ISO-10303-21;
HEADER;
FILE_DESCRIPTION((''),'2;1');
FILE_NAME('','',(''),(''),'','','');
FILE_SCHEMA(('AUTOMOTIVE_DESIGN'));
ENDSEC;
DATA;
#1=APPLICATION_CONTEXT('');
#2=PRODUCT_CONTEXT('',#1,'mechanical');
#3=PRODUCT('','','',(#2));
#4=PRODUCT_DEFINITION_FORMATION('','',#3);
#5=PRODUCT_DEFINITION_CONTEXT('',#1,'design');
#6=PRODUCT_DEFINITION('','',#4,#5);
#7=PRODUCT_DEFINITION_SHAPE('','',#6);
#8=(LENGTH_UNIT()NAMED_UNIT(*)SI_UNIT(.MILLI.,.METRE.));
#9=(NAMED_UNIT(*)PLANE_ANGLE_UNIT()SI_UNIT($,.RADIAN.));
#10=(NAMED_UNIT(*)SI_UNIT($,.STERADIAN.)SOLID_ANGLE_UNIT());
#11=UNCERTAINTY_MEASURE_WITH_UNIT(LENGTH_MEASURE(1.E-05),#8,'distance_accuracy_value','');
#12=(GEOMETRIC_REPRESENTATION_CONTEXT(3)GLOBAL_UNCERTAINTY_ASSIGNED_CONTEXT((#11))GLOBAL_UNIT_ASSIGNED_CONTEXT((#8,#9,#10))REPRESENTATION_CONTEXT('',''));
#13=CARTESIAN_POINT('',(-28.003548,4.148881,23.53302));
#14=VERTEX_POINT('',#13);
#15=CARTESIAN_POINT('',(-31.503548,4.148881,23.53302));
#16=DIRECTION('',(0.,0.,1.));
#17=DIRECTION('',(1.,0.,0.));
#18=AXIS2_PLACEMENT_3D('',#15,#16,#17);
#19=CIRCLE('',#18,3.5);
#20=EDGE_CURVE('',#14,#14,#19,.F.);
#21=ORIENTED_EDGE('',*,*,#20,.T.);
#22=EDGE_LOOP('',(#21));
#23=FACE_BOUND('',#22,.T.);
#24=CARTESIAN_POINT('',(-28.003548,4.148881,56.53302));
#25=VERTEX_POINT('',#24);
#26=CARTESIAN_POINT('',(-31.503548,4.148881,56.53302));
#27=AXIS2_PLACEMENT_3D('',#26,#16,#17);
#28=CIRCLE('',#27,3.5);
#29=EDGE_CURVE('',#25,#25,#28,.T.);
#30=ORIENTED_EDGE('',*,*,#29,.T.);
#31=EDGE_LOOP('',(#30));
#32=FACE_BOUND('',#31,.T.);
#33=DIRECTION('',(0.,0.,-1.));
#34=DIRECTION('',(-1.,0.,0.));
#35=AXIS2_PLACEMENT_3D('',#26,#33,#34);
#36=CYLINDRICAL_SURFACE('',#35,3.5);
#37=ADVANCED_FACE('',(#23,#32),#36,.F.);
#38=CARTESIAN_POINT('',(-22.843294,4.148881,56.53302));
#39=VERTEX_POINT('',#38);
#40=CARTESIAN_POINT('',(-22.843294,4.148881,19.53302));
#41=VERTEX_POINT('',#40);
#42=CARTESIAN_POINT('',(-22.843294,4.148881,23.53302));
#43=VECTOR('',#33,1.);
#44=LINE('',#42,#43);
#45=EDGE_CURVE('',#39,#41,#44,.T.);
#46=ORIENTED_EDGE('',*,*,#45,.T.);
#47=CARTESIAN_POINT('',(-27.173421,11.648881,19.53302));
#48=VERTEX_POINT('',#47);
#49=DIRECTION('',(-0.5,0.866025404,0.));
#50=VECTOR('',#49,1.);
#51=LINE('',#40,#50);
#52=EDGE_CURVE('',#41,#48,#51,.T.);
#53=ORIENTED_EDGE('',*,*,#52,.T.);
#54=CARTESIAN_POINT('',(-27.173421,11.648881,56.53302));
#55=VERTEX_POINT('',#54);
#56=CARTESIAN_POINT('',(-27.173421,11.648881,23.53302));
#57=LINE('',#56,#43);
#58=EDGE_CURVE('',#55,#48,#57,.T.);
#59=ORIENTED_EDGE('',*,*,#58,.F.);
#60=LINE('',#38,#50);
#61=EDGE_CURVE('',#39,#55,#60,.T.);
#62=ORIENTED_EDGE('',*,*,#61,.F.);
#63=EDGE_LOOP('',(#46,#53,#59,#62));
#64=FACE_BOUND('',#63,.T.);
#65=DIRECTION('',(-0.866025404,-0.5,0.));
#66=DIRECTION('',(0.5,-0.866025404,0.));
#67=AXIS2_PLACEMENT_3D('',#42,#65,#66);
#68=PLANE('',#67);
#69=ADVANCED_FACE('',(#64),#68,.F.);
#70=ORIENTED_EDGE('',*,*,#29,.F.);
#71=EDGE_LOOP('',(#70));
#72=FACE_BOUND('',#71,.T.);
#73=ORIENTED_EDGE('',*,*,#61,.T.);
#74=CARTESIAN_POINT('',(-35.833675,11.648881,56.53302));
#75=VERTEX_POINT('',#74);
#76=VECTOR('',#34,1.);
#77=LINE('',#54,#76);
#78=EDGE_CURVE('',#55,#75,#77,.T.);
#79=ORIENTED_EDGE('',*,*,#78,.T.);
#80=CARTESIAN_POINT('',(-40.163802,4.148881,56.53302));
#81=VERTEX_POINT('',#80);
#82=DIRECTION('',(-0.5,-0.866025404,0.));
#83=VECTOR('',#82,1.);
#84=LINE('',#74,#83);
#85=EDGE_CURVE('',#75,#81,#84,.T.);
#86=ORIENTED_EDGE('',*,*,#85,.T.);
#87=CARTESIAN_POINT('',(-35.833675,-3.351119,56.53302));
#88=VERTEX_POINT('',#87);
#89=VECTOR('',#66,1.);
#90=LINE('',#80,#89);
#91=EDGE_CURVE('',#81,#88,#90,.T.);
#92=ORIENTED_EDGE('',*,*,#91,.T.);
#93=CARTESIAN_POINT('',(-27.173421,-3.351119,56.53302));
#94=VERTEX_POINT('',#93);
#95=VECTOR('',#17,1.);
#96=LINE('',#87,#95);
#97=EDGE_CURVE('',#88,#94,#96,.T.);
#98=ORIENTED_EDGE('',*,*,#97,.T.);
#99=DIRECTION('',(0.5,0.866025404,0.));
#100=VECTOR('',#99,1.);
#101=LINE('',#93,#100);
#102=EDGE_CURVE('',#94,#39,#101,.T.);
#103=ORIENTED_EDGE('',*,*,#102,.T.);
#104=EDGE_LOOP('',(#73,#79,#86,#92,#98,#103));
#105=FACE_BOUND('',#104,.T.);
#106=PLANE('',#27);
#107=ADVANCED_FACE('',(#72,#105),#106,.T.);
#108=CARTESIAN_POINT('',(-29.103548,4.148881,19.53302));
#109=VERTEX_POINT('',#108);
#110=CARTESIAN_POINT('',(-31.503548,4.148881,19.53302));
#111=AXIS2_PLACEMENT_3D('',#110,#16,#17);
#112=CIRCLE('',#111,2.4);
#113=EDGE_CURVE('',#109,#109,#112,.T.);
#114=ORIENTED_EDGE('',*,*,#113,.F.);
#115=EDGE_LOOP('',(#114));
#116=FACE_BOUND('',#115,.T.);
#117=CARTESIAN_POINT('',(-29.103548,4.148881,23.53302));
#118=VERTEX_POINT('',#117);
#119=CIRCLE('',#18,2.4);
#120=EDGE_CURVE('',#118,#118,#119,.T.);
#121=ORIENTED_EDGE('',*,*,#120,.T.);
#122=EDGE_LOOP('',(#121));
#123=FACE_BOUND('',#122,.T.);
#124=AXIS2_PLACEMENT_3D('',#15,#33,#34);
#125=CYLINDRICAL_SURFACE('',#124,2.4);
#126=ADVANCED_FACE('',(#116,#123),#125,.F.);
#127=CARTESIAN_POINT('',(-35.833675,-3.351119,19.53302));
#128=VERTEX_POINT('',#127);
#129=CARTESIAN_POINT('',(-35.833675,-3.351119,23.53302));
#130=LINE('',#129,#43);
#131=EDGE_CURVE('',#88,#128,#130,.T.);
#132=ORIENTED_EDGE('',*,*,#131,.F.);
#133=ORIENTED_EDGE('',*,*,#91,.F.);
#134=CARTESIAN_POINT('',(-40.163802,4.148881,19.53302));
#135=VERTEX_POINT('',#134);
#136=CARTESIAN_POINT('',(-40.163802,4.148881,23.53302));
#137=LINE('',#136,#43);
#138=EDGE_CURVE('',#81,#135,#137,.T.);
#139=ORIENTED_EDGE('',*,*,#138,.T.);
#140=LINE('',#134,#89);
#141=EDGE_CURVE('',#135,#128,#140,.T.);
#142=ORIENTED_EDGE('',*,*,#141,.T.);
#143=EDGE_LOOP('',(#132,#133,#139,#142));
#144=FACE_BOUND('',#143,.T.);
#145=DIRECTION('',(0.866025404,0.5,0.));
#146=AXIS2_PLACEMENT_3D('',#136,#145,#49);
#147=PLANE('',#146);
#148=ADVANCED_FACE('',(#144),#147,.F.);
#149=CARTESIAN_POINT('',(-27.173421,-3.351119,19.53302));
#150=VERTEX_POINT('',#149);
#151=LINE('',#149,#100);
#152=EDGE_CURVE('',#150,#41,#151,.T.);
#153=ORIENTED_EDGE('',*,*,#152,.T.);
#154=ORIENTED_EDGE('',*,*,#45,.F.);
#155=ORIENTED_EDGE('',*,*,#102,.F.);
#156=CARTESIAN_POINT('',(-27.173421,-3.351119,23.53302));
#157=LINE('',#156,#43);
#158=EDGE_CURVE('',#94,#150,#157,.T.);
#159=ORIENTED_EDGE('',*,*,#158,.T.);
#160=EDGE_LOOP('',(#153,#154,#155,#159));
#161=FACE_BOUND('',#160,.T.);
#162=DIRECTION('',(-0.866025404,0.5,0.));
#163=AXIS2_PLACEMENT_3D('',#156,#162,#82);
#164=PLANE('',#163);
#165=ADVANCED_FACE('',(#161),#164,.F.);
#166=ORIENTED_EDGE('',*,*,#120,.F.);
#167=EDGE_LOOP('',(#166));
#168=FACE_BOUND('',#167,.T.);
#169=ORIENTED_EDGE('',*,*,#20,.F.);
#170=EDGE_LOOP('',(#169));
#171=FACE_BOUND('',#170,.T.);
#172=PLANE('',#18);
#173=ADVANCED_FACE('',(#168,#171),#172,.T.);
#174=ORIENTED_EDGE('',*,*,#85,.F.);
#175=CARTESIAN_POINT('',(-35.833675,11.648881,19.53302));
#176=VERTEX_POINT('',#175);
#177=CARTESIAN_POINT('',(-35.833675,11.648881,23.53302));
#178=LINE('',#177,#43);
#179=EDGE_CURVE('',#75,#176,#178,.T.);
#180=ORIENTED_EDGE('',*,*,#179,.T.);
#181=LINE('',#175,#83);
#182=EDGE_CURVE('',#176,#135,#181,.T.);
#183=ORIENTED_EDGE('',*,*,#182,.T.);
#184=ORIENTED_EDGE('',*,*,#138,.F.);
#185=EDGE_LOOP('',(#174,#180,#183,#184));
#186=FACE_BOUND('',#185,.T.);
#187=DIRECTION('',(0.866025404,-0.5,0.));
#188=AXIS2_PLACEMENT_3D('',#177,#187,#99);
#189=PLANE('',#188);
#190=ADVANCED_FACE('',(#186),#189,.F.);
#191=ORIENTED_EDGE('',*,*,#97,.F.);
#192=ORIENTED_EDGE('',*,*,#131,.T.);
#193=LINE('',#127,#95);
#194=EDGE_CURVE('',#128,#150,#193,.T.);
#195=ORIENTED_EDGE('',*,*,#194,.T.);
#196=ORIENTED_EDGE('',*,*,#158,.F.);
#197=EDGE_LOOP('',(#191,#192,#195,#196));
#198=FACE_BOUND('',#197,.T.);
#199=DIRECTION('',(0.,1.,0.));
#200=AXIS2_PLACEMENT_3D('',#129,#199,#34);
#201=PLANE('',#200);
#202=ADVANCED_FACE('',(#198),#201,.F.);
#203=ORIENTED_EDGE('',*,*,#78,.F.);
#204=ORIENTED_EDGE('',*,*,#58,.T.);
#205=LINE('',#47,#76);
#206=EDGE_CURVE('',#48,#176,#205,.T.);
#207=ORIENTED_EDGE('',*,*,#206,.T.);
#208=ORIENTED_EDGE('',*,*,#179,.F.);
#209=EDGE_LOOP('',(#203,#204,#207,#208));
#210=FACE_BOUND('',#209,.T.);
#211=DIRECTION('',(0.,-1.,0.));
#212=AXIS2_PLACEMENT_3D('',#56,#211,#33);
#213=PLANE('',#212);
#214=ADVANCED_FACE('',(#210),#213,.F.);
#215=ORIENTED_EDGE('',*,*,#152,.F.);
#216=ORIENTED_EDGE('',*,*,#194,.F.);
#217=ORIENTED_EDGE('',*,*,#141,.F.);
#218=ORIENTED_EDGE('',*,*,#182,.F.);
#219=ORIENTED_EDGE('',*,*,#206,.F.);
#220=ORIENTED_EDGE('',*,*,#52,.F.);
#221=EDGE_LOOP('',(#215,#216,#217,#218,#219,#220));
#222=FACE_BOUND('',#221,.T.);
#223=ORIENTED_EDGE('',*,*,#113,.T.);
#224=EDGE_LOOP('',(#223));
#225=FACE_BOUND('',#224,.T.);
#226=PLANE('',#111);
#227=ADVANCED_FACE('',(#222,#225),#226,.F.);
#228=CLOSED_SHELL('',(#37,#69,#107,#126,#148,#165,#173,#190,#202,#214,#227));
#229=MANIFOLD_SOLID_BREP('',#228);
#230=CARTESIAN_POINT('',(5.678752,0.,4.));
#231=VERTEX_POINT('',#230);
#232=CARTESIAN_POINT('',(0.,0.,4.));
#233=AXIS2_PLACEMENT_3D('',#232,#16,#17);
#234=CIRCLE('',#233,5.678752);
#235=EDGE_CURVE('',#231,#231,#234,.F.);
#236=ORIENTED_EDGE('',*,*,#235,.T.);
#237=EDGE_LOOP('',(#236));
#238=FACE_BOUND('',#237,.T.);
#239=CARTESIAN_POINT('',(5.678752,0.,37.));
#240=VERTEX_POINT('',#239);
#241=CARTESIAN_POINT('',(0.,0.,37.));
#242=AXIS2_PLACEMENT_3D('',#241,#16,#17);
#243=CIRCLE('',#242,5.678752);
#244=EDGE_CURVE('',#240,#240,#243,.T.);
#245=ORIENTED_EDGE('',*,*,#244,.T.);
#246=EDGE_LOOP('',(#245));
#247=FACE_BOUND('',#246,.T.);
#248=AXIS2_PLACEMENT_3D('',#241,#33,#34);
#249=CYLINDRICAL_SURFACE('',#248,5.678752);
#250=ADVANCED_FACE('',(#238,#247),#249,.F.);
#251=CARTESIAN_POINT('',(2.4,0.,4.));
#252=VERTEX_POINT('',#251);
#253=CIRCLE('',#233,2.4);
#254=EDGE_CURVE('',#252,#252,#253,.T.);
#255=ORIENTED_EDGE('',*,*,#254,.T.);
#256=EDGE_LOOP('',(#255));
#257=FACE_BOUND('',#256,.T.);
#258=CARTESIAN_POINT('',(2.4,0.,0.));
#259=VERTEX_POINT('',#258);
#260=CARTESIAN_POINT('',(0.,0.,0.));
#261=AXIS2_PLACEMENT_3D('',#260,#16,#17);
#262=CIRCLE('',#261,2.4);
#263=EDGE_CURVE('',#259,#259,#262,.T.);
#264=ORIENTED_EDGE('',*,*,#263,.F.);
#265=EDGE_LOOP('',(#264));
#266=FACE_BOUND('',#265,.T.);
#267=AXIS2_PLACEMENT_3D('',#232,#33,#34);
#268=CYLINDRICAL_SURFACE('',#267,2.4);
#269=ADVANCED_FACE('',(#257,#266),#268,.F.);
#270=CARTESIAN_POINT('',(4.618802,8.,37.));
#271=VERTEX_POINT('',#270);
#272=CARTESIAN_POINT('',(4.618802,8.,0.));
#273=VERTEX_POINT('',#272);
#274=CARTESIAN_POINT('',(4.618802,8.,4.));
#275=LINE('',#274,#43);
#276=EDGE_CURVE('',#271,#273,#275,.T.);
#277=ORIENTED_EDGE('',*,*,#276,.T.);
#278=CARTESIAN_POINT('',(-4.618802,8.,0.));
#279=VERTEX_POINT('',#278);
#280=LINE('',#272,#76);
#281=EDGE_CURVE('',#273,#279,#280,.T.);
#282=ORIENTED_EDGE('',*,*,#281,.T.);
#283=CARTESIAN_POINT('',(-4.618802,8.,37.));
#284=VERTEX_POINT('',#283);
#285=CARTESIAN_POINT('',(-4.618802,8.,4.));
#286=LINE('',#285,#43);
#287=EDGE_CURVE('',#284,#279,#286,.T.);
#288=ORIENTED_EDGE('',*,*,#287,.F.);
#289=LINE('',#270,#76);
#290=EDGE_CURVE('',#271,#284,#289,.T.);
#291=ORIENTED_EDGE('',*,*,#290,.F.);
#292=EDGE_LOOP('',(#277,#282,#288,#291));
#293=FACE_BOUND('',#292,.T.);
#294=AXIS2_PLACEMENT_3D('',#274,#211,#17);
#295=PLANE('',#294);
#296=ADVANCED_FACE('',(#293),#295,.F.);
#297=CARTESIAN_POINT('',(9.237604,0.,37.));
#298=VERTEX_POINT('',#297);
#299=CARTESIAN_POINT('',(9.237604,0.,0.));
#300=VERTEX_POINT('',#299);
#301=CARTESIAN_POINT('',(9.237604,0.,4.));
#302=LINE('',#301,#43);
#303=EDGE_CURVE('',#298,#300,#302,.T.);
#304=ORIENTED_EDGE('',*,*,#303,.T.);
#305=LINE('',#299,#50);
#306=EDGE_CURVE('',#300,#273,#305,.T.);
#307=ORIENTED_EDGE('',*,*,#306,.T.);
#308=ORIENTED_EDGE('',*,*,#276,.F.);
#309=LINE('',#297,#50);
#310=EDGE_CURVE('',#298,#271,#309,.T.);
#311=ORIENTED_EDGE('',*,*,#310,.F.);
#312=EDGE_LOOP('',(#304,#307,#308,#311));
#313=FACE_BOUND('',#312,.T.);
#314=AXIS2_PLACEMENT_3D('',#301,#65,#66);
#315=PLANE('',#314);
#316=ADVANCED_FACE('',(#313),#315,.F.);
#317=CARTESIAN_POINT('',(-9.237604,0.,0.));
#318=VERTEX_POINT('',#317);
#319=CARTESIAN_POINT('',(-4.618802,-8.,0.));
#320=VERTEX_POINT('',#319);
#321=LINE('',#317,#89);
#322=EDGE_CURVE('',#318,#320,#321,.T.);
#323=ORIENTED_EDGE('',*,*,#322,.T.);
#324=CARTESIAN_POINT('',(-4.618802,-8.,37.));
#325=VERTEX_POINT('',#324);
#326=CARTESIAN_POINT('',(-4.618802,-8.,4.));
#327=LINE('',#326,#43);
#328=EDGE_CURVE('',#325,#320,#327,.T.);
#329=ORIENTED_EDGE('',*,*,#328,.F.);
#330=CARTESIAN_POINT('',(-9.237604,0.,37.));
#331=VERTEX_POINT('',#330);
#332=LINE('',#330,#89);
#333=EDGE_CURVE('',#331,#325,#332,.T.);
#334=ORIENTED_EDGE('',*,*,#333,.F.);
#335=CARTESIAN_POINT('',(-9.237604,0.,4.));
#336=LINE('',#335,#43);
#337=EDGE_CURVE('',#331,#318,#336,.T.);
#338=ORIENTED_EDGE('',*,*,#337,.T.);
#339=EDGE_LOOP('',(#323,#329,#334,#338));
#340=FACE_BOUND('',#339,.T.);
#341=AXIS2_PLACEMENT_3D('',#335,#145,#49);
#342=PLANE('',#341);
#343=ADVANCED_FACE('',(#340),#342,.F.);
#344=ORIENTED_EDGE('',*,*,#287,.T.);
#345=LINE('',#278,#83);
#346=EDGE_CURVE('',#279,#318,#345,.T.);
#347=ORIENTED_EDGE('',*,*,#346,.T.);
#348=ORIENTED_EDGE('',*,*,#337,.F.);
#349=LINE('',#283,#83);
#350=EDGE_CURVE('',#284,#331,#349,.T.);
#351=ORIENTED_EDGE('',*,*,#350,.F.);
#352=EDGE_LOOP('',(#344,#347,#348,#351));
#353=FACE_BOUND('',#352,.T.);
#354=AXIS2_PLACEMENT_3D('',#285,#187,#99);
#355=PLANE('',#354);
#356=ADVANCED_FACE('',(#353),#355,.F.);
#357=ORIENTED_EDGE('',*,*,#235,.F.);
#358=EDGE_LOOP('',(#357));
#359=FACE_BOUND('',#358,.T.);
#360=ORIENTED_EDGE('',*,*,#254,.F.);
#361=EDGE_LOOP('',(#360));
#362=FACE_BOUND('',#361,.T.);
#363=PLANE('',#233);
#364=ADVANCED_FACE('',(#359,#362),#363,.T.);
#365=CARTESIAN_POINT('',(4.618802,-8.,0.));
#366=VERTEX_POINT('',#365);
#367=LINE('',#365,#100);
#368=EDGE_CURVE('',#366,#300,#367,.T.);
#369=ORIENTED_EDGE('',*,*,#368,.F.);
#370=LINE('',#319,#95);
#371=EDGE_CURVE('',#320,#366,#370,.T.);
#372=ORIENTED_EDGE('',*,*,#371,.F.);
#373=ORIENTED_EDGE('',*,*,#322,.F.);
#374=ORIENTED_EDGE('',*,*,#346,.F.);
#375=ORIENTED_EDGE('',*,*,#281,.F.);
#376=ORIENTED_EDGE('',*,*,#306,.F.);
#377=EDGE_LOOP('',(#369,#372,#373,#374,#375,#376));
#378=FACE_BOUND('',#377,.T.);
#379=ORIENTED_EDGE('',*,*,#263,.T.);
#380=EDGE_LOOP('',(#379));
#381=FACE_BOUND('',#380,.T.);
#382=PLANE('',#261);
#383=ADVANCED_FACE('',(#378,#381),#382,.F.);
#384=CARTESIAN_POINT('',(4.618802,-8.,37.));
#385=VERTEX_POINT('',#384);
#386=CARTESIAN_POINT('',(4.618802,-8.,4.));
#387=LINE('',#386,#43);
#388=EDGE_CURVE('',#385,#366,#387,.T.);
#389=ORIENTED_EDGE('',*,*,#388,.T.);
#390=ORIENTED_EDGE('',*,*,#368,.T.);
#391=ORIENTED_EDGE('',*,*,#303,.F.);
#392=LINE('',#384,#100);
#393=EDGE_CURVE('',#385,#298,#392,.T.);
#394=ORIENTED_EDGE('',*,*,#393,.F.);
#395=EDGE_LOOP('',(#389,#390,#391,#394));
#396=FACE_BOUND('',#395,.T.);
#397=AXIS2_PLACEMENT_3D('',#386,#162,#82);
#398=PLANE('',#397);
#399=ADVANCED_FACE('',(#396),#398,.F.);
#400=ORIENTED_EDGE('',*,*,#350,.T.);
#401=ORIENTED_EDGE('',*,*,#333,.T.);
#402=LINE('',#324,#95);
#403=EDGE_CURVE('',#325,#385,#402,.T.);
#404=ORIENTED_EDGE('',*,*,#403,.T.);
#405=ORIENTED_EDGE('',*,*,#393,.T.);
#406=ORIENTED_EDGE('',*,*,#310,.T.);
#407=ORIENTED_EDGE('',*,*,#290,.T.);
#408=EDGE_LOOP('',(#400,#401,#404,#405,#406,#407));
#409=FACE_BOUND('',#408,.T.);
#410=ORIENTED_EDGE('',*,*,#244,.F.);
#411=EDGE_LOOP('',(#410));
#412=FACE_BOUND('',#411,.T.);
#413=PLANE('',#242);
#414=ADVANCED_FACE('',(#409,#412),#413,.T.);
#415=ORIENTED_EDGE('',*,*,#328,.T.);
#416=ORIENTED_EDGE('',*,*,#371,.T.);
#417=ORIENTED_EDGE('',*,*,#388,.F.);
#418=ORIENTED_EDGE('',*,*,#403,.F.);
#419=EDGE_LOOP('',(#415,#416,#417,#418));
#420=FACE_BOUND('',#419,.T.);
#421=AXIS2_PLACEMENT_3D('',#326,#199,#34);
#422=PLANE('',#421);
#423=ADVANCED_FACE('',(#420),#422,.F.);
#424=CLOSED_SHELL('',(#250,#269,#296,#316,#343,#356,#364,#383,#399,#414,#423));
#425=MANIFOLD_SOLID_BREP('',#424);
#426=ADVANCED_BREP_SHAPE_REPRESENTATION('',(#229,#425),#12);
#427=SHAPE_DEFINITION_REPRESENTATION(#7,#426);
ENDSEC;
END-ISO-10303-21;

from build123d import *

# Parameters (mm, degrees)
SKETCH1_R              = 2.4
BOSS_EXTRUDE1_DEPTH    = 4
SKETCH2_R              = 5.678751563
BOSS_EXTRUDE2_DEPTH    = 33
DETECTOR_START         = 19.533020459
DETECTOR_OUTLINE_R     = 3.5
DETECTOR_DEPTH         = 37
DETECTOR_2_OUTLINE_R   = 3.5
DETECTOR_2_OUTLINE_R_2 = 2.4
DETECTOR_2_DEPTH       = 4


# Read off the part's stored shape, not the designer's step: detector
with BuildPart() as part:
    # Sketch1 → Boss-Extrude1 (new body)
    with BuildSketch(Plane.XY):
        Polygon((9.237604307, 0), (4.618802154, 8), (-4.618802154, 8), (-9.237604307, 0), (-4.618802154, -8), (4.618802154, -8), align=None)
        Circle(SKETCH1_R, mode=Mode.SUBTRACT)
    extrude(amount=BOSS_EXTRUDE1_DEPTH)

    # Sketch2 → Boss-Extrude2 (add)
    with BuildSketch(Plane.XY.offset(4)):
        Polygon((9.237604307, 0), (4.618802154, 8), (-4.618802154, 8), (-9.237604307, 0), (-4.618802154, -8), (4.618802154, -8), align=None)
        Circle(SKETCH2_R, mode=Mode.SUBTRACT)
    extrude(amount=BOSS_EXTRUDE2_DEPTH)


with BuildPart() as body_2:
    # detector outline → detector (new body)
    with BuildSketch(Plane.XY.offset(DETECTOR_START)):
        Polygon((-35.833674913, 11.648881449), (-40.163801932, 4.148881449), (-35.833674913, -3.351118551), (-27.173420875, -3.351118551), (-22.843293856, 4.148881449), (-27.173420875, 11.648881449), align=None)
        with Locations((-31.503547894, 4.148881449)):
            Circle(DETECTOR_OUTLINE_R, mode=Mode.SUBTRACT)
    extrude(amount=DETECTOR_DEPTH)

    # detector 2 outline → detector 2 (add)
    with BuildSketch(Plane.XY.offset(DETECTOR_START)):
        with Locations((-31.503547894, 4.148881449)):
            Circle(DETECTOR_2_OUTLINE_R)
        with Locations((-31.503547894, 4.148881449)):
            Circle(DETECTOR_2_OUTLINE_R_2, mode=Mode.SUBTRACT)
    extrude(amount=DETECTOR_2_DEPTH)


solid = Compound([part.part, body_2.part])
